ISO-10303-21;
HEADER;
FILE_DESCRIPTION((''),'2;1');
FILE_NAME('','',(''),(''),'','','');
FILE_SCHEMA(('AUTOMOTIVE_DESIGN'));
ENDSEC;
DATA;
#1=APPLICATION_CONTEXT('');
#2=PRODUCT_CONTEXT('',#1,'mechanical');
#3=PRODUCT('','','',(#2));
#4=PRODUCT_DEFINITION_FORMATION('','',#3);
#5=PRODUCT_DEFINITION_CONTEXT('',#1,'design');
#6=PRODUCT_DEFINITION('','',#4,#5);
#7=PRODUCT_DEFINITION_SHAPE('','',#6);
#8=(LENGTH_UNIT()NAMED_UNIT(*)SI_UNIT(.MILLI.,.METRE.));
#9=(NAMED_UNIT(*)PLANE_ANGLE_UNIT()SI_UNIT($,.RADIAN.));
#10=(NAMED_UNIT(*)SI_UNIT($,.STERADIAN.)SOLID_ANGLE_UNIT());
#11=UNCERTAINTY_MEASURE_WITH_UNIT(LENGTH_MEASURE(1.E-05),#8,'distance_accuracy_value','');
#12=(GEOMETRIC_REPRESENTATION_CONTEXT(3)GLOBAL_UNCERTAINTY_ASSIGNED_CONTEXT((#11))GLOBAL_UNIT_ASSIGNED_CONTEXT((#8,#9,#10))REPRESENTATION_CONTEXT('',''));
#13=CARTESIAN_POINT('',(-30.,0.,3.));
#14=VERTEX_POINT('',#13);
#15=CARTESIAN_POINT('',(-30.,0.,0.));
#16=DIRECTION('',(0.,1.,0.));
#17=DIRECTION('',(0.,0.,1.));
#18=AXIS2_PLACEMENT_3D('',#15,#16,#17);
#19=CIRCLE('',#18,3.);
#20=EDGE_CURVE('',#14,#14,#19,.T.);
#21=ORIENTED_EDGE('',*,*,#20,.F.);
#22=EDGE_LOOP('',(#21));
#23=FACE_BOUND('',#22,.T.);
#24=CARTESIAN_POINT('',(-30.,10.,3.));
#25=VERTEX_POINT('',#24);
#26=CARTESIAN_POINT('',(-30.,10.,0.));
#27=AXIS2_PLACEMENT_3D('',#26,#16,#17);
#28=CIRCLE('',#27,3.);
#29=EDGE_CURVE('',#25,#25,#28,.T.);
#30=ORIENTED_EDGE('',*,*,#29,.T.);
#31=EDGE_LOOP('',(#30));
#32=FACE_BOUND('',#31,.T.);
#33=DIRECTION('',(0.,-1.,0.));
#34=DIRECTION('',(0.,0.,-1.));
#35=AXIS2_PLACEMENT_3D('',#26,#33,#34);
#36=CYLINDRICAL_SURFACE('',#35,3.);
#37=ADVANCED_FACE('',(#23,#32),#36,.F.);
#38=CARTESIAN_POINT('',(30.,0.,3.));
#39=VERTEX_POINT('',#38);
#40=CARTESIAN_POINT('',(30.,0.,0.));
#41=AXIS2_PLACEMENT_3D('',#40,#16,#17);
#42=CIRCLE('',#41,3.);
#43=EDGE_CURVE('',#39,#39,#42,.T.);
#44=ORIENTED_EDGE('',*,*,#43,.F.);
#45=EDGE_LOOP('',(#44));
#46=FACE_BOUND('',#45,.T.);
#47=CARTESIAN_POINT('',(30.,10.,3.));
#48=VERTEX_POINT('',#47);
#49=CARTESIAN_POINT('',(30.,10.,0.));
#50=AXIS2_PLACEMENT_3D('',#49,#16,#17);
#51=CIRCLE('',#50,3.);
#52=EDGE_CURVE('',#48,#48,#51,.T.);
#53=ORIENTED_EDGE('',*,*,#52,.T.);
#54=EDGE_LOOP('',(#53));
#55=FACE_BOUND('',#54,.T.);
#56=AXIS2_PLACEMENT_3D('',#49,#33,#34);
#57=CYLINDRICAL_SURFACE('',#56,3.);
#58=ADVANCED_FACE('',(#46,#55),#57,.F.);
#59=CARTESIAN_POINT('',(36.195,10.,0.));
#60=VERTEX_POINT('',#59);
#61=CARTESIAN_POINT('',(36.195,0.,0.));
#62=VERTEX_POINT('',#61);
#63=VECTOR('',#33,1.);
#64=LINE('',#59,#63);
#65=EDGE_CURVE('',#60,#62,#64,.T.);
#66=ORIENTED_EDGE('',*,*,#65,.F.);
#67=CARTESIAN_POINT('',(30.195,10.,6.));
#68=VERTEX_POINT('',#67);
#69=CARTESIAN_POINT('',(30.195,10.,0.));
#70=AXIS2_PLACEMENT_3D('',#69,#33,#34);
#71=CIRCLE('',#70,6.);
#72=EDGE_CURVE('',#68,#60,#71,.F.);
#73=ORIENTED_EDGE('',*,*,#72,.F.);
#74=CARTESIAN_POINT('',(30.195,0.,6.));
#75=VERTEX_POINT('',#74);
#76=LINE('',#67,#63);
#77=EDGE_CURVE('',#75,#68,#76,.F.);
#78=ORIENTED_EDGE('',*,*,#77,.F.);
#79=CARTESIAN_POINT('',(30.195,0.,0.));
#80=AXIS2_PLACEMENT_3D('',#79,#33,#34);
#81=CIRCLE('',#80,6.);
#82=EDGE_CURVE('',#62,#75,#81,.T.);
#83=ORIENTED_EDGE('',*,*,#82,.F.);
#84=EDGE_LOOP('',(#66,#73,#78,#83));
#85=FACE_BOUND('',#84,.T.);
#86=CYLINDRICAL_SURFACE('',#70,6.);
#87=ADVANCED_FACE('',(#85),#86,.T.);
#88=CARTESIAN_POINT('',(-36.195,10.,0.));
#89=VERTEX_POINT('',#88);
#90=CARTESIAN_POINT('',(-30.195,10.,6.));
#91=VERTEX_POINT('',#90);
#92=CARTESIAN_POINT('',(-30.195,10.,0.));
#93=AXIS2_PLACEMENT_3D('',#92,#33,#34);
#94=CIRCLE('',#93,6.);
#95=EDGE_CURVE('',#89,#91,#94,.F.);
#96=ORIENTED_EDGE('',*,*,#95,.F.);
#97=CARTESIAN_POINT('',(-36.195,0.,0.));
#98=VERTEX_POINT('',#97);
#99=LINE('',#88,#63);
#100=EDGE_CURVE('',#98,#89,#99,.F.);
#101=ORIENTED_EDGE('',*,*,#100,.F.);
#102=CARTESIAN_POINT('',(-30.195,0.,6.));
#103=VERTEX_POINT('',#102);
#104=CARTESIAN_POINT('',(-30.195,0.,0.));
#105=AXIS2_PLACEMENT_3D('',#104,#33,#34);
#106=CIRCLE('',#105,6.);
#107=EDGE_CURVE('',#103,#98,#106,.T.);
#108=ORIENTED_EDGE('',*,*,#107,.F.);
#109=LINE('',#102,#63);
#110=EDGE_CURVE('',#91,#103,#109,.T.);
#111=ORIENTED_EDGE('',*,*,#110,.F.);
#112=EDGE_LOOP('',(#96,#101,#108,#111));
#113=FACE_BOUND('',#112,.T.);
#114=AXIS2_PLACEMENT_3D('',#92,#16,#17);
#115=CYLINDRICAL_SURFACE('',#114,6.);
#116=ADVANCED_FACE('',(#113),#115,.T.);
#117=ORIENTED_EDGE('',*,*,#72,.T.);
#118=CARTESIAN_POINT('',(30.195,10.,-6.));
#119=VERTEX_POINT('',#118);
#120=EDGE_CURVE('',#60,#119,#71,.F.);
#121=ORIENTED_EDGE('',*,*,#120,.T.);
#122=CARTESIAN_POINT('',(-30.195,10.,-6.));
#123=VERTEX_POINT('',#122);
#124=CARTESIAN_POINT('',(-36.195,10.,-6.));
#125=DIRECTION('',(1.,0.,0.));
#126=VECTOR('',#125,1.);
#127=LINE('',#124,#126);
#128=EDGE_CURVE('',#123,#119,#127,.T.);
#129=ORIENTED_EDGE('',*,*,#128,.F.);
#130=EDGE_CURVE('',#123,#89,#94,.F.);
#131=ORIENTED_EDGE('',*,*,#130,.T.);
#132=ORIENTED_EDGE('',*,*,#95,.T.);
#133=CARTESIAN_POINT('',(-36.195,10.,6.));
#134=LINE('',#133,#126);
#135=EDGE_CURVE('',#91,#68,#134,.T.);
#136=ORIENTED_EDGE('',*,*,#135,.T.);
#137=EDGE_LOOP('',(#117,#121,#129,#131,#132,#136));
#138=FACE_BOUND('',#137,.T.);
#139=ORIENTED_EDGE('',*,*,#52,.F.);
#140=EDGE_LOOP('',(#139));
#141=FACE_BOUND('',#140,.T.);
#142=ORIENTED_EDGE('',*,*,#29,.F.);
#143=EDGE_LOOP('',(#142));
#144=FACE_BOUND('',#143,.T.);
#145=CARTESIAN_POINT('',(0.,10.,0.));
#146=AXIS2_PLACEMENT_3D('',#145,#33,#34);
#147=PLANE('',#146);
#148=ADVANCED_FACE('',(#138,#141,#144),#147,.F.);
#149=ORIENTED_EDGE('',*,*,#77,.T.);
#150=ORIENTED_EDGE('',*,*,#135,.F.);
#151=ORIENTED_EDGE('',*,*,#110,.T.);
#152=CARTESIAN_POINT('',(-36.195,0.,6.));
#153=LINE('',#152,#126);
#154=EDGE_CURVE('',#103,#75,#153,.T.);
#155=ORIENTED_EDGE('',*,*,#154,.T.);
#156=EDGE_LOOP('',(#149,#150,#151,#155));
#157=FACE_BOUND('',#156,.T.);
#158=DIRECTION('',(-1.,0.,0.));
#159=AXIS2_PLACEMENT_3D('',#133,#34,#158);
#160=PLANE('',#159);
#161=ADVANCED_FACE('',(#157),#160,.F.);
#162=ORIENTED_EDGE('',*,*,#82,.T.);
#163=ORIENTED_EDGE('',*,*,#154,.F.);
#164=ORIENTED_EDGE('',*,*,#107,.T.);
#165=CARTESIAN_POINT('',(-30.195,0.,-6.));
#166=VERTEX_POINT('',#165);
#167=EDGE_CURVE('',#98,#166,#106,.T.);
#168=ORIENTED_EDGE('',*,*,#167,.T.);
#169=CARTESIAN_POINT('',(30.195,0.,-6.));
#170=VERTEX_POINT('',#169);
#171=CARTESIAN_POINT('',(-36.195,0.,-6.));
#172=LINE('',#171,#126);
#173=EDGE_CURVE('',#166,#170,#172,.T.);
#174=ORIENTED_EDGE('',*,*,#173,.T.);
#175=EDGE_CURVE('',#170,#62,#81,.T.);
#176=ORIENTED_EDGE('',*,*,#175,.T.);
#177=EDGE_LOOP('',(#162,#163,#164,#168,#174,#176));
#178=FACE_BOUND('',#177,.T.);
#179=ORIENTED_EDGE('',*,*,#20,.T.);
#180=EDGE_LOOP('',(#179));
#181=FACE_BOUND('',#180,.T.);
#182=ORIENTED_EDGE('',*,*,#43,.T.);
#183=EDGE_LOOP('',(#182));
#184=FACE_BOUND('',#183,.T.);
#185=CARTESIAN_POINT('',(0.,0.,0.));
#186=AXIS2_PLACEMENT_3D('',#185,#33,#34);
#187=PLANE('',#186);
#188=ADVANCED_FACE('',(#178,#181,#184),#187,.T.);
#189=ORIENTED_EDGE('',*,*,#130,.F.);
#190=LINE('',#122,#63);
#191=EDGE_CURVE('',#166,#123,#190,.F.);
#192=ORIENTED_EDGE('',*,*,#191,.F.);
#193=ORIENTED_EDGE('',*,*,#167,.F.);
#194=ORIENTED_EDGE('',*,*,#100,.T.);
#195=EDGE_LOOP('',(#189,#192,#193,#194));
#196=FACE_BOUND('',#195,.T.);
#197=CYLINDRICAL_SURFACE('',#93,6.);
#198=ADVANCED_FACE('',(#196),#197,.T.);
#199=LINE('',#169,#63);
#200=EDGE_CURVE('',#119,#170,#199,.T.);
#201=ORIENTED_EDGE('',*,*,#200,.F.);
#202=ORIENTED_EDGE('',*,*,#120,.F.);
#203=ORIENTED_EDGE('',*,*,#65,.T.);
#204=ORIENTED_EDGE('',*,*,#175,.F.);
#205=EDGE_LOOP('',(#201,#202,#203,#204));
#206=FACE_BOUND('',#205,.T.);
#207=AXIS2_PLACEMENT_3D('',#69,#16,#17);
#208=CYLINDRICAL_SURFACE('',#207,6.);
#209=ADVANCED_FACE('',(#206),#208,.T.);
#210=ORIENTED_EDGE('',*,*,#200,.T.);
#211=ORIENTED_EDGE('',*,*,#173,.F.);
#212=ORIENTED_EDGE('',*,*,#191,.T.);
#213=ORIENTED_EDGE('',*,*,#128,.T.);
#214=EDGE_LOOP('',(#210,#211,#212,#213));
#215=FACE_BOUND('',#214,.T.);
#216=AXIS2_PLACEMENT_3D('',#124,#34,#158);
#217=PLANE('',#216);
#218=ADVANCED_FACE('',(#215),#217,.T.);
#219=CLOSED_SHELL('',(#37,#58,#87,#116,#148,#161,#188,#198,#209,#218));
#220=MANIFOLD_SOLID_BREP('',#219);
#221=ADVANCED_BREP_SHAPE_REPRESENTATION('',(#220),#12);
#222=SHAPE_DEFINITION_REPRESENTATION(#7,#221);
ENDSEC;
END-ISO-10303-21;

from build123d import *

# Parameters (mm, degrees)
SKETCH1_W           = 72.39
SKETCH1_H           = 12
SKETCH1_R           = 3
BOSS_EXTRUDE1_DEPTH = 10
FILLET1_R           = 6


with BuildPart() as part:
    # Sketch1 → Boss-Extrude1 (new body)
    with BuildSketch(Plane(origin=(0, 0, 0), x_dir=(1, 0, 0), z_dir=(0, 1, 0))):
        Rectangle(SKETCH1_W, SKETCH1_H)
        with Locations(Location((30, 0, 0), (0, 0, 270))):
            Circle(SKETCH1_R, mode=Mode.SUBTRACT)
        with Locations(Location((-30, 0, 0), (0, 0, 270))):
            Circle(SKETCH1_R, mode=Mode.SUBTRACT)
    extrude(amount=BOSS_EXTRUDE1_DEPTH)

    # Fillet1
    fillet1_edges = [part.edges().sort_by_distance(p)[0] for p in [
        (36.195, 5, -6),
        (36.195, 5, 6),
        (-36.195, 5, -6),
        (-36.195, 5, 6),
    ]]
    fillet(fillet1_edges, radius=FILLET1_R - 0.0001)  # a hair under: the kernel refuses the full size


solid = part.part
